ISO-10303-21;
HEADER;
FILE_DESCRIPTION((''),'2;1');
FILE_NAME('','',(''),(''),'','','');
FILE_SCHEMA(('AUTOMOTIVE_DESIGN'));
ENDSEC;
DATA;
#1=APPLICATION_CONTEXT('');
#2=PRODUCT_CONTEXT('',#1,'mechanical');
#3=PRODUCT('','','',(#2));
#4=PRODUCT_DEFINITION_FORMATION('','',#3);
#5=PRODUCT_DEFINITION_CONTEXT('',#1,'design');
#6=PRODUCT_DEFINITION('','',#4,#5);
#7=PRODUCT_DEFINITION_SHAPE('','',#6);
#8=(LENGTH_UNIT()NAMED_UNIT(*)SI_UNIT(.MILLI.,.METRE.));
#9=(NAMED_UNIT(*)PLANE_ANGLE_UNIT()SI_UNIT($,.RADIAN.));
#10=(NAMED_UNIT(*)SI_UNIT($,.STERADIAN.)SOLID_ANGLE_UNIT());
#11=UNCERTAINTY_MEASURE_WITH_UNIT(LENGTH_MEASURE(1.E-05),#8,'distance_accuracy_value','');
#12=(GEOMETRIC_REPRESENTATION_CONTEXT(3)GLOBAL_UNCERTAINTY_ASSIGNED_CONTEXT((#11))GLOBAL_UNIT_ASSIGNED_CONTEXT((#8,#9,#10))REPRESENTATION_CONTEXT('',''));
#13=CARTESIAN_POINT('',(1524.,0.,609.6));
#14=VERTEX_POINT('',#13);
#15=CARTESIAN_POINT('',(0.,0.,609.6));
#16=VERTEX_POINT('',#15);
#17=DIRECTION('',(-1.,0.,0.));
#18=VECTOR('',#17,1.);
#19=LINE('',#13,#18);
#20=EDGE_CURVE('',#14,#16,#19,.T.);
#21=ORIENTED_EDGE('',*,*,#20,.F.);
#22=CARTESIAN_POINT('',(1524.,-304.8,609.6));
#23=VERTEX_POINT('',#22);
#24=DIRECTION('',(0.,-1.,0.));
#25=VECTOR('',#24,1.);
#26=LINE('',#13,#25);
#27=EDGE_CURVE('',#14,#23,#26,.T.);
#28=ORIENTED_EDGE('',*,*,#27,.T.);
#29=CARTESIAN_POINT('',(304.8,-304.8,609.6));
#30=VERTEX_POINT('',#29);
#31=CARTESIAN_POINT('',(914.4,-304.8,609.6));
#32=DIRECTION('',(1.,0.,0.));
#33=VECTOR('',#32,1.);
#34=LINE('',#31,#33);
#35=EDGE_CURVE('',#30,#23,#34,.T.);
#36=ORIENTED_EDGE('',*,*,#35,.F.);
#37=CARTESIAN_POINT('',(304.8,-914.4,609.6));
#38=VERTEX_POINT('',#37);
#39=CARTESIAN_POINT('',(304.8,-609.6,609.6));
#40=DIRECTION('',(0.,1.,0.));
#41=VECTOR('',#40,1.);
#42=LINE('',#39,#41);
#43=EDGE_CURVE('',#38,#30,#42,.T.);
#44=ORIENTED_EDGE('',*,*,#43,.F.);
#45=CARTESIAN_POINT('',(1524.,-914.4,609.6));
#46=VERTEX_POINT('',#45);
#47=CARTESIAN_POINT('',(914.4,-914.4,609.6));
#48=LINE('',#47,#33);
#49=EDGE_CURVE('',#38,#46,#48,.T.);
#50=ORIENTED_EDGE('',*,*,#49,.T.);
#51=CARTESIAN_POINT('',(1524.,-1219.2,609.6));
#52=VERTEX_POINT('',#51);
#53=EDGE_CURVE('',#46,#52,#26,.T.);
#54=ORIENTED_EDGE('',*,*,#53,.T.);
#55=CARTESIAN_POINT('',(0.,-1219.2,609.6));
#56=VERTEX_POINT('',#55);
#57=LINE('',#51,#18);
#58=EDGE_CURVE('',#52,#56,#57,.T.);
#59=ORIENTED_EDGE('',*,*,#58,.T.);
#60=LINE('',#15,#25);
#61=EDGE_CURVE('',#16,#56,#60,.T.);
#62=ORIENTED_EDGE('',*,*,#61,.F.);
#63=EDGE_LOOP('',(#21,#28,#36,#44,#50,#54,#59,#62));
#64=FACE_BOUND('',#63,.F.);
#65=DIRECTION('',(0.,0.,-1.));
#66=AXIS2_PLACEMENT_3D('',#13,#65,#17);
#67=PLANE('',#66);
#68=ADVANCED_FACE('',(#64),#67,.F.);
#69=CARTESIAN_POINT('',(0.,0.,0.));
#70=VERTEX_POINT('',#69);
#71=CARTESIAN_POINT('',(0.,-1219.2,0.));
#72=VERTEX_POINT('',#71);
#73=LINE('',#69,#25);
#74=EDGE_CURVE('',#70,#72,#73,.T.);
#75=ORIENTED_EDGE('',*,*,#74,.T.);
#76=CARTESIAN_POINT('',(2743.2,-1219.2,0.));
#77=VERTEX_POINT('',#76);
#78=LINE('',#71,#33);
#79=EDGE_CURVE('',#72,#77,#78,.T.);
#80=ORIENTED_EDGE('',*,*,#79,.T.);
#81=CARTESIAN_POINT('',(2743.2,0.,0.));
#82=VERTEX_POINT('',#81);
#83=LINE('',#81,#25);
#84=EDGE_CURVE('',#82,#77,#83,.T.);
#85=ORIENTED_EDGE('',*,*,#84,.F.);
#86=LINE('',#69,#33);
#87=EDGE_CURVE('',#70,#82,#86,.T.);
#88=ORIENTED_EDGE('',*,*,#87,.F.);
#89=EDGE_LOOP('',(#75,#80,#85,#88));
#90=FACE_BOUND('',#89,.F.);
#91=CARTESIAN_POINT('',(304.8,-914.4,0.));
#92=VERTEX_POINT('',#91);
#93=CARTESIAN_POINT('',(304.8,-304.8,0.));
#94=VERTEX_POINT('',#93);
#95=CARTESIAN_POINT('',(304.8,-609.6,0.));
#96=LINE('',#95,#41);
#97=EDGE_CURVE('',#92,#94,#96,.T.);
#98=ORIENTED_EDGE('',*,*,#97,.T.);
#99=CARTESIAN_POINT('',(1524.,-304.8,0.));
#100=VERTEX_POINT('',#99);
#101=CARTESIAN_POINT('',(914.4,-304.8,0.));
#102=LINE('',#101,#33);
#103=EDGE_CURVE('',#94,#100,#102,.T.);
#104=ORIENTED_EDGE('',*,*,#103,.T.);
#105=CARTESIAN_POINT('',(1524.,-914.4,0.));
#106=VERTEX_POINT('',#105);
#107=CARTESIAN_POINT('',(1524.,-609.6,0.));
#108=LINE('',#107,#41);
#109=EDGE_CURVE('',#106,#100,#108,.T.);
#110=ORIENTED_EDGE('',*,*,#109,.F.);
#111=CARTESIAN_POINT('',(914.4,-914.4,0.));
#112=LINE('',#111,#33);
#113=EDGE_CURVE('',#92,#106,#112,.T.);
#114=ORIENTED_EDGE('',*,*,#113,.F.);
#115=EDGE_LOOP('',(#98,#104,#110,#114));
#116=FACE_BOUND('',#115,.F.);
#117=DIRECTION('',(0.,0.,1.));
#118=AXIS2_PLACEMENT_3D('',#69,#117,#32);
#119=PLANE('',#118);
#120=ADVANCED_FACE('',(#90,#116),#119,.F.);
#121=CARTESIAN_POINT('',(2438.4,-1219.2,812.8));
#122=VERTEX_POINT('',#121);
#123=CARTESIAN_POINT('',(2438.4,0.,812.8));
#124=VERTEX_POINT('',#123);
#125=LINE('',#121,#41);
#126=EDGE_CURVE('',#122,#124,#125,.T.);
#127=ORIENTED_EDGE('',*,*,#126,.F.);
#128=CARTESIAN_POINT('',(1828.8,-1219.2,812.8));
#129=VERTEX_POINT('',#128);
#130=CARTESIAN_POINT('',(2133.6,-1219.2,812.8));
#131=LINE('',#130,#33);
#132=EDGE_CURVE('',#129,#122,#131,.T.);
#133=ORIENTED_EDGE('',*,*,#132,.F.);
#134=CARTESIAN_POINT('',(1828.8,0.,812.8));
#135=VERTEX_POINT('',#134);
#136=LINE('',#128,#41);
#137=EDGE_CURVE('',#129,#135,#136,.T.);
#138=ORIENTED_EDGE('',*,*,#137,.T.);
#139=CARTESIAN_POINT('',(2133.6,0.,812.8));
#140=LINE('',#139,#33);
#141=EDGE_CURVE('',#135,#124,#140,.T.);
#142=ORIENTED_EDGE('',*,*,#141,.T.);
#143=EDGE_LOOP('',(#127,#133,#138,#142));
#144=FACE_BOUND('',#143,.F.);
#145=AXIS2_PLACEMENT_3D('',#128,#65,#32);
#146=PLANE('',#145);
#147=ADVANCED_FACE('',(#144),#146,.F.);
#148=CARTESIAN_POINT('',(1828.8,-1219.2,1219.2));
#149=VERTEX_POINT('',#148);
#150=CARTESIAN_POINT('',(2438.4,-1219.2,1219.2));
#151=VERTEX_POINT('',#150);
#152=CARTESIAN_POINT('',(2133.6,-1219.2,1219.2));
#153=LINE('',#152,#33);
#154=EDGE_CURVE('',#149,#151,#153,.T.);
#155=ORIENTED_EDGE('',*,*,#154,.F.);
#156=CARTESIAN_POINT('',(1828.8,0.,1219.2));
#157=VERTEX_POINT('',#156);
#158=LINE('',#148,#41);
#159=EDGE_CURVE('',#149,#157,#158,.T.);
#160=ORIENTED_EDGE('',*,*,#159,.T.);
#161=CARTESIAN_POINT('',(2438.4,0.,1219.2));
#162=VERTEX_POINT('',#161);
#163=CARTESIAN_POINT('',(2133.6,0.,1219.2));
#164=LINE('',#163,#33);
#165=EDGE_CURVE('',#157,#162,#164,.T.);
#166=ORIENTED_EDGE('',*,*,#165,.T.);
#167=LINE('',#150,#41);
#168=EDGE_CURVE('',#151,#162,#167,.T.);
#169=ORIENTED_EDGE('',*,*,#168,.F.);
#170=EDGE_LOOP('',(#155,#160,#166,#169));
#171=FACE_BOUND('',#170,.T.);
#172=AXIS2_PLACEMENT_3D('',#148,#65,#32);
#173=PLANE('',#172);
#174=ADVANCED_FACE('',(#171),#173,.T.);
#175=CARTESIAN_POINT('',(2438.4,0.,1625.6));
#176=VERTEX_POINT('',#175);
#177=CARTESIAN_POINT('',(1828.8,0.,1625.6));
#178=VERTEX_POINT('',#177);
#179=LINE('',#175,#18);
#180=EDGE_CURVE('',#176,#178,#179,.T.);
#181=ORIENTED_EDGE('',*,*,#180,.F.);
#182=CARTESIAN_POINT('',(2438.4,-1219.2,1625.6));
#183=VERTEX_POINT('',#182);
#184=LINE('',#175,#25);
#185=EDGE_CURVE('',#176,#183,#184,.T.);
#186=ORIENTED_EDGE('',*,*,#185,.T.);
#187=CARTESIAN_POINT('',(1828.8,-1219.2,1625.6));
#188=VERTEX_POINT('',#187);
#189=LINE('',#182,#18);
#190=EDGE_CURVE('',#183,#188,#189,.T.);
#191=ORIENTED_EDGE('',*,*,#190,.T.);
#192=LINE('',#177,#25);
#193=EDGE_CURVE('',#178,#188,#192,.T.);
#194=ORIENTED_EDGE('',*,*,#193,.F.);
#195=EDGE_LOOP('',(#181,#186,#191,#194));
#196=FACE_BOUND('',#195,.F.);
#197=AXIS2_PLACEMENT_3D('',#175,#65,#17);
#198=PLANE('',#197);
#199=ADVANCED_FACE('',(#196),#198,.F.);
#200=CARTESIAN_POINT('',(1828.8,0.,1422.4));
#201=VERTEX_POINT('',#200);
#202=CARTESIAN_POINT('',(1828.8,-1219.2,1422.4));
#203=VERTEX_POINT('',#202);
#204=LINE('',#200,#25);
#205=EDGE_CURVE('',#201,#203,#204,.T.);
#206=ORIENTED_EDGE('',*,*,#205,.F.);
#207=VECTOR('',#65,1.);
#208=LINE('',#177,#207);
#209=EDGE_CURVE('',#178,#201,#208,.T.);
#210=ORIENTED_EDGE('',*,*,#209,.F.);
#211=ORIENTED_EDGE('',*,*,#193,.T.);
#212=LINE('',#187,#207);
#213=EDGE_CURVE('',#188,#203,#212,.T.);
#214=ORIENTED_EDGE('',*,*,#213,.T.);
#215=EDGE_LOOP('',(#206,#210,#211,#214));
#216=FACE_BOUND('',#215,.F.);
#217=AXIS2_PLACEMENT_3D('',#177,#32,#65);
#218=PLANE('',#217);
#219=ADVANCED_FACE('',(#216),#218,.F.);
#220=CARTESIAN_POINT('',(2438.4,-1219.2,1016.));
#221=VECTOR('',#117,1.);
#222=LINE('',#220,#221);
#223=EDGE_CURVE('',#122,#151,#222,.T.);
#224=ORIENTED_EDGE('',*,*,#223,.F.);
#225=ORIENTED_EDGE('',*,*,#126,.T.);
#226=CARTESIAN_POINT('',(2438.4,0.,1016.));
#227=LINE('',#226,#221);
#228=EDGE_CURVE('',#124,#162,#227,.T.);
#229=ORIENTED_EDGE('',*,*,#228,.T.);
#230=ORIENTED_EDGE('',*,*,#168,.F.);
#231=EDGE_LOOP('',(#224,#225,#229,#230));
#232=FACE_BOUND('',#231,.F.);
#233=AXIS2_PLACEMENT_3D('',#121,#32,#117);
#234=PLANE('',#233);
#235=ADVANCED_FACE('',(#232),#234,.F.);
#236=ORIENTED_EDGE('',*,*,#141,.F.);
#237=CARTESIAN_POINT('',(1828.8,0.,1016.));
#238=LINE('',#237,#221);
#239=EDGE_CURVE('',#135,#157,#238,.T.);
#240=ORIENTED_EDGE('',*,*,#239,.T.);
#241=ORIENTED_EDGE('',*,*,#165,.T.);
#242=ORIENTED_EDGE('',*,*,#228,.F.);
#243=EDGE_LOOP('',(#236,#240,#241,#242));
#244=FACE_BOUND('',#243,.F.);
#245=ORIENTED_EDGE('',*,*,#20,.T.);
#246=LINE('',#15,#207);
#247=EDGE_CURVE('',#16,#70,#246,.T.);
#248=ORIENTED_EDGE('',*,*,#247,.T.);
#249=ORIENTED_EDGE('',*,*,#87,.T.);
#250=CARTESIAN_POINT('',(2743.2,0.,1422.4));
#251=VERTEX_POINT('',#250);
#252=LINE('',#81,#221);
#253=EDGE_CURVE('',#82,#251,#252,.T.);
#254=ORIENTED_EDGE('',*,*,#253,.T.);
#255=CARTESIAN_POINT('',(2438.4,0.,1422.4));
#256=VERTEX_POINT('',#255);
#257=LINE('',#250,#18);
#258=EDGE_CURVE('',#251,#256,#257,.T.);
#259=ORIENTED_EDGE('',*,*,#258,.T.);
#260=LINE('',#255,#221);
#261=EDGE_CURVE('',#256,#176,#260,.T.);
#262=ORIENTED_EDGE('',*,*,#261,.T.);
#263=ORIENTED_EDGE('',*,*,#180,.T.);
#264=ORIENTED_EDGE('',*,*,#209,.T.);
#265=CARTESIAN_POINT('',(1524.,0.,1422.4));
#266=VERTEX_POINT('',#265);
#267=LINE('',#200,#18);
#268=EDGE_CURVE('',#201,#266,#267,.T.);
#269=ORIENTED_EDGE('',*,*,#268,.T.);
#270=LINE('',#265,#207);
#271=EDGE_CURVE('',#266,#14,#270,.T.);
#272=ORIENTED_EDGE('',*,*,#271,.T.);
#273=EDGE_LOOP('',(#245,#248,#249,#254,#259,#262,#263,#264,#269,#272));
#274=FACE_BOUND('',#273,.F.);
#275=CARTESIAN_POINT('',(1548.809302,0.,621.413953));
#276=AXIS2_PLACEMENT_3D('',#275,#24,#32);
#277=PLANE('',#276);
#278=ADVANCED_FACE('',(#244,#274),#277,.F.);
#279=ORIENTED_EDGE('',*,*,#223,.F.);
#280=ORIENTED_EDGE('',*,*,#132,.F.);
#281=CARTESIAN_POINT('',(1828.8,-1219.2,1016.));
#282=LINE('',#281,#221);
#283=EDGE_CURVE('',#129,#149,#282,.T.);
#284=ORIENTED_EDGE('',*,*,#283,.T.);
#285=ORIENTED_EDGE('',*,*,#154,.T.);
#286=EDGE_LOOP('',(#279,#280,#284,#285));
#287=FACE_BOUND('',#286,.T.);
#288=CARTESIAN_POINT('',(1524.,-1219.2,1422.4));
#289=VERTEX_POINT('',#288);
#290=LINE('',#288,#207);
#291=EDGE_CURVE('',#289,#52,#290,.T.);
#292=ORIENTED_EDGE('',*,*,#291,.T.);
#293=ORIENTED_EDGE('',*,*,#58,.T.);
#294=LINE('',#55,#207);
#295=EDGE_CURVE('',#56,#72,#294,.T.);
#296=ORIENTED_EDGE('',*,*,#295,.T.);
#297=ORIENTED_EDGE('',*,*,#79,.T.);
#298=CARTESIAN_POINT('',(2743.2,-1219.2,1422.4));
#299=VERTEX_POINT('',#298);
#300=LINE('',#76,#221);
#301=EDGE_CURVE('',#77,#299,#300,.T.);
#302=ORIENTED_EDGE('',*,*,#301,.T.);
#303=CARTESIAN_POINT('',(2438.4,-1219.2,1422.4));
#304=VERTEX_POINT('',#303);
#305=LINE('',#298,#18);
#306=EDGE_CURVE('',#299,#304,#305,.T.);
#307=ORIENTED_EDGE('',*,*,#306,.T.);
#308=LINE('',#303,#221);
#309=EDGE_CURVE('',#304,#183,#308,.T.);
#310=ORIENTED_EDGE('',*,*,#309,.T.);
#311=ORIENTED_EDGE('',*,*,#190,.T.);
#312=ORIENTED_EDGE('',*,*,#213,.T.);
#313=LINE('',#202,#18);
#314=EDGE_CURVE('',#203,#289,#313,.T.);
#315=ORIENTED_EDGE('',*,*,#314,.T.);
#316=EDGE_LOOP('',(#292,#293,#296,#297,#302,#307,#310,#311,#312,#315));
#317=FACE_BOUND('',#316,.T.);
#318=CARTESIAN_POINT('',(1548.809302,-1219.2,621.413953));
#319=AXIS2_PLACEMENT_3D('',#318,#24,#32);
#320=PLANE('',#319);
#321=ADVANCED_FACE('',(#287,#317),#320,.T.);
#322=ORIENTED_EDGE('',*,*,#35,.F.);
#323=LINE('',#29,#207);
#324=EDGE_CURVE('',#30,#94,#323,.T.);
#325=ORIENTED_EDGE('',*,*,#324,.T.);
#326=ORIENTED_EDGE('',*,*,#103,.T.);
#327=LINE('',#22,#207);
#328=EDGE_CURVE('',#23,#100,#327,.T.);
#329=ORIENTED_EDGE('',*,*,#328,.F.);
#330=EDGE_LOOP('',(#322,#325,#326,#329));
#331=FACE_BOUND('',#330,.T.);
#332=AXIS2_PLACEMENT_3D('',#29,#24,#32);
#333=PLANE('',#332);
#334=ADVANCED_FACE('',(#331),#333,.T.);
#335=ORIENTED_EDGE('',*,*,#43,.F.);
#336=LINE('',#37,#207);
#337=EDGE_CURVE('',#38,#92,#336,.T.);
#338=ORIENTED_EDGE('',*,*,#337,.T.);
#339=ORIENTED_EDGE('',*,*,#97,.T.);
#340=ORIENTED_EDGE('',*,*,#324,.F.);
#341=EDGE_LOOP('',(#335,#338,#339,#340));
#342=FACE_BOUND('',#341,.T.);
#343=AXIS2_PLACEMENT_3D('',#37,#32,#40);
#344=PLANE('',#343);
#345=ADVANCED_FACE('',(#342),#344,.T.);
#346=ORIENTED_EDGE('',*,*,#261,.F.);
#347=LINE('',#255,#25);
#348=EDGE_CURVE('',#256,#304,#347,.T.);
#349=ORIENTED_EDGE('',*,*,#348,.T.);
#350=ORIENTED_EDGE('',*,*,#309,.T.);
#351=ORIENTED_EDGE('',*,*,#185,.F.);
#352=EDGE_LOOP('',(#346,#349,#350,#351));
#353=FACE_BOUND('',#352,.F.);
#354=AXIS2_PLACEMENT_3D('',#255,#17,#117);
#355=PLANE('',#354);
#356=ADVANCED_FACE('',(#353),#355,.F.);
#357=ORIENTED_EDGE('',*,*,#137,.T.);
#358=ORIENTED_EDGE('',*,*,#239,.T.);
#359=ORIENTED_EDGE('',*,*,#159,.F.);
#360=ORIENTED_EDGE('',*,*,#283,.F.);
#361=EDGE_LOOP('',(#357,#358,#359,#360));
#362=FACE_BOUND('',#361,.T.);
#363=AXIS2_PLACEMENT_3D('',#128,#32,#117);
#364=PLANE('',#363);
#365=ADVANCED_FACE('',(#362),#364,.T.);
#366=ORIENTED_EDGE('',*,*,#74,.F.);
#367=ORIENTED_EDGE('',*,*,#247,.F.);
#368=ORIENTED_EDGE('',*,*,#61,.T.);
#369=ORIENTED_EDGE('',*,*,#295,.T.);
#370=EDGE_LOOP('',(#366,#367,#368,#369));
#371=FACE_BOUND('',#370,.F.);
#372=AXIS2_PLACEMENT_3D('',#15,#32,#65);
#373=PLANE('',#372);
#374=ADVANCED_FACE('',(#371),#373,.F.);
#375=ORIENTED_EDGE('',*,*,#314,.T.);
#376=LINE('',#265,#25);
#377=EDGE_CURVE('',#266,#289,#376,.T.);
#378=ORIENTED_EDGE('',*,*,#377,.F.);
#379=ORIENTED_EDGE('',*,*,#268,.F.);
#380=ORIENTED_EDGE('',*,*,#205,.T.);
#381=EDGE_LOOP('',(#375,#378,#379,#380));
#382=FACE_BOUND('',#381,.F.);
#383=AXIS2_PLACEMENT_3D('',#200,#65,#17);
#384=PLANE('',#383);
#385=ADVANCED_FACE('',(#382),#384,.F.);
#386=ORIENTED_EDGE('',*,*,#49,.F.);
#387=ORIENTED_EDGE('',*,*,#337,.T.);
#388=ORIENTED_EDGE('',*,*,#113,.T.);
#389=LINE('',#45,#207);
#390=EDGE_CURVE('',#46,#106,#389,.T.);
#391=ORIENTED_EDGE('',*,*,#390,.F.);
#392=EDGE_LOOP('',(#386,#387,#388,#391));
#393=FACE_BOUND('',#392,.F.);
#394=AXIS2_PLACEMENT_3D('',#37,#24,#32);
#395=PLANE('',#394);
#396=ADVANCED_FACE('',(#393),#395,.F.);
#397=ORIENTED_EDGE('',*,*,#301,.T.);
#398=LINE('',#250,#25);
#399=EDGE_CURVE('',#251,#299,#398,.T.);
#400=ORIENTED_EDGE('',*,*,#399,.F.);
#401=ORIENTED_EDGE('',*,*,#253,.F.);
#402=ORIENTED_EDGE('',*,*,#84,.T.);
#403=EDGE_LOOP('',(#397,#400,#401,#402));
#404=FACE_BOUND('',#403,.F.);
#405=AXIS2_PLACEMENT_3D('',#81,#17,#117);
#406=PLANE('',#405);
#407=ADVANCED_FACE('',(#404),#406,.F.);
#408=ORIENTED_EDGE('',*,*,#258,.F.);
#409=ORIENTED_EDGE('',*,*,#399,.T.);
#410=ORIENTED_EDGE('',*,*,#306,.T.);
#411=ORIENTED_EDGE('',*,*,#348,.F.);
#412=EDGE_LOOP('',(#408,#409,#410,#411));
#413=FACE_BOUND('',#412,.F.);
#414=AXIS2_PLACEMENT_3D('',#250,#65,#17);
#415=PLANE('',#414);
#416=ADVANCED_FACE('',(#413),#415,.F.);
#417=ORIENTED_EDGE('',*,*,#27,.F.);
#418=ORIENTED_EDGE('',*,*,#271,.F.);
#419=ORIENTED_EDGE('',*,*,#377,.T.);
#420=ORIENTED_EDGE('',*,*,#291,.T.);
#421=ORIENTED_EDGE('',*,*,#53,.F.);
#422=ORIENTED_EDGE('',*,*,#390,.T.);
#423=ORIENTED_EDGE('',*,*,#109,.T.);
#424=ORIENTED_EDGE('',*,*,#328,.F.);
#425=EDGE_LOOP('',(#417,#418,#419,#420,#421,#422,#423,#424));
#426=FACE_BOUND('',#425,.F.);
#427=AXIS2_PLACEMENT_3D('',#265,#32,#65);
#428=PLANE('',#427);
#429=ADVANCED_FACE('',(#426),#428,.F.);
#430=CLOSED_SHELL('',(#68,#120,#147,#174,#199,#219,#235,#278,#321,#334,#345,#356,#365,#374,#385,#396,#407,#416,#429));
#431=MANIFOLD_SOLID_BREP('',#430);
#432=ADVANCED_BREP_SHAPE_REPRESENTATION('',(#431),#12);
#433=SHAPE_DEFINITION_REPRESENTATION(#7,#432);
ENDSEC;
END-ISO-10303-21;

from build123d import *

# Parameters (mm, degrees)
F1_DEPTH = 1219.2
F2_W     = 609.6
F2_H     = 406.4
F3_DEPTH = 1219.2
F4_W     = 1219.2
F4_H     = 609.6
F5_DEPTH = 609.6


# Not quite as in the source:
# - a feature of the source that left no trace in its solid (it failed there, or was rolled back) is left out


with BuildPart() as f1:
    # F0 (on Front) → F1 (new body)
    with BuildSketch(Plane.XZ):
        Polygon((0, 609.6), (0, 0), (2743.2, 0), (2743.2, 1422.4), (2438.4, 1422.4), (2438.4, 1625.6), (1828.8, 1625.6), (1828.8, 1422.4), (1524, 1422.4), (1524, 609.6), align=None)
    extrude(amount=F1_DEPTH)

    # F2 (on face) → F3 (cut)
    with BuildSketch(Plane.XZ.offset(1219.2)):
        with Locations((2133.6, 1016)):
            Rectangle(F2_W, F2_H)
    extrude(amount=-F3_DEPTH, mode=Mode.SUBTRACT)

    # F4 (on face) → F5 (cut)
    with BuildSketch(Plane.XY.offset(609.6)):
        with Locations((914.4, -609.6)):
            Rectangle(F4_W, F4_H)
    extrude(amount=-F5_DEPTH, mode=Mode.SUBTRACT)


solid = f1.part
